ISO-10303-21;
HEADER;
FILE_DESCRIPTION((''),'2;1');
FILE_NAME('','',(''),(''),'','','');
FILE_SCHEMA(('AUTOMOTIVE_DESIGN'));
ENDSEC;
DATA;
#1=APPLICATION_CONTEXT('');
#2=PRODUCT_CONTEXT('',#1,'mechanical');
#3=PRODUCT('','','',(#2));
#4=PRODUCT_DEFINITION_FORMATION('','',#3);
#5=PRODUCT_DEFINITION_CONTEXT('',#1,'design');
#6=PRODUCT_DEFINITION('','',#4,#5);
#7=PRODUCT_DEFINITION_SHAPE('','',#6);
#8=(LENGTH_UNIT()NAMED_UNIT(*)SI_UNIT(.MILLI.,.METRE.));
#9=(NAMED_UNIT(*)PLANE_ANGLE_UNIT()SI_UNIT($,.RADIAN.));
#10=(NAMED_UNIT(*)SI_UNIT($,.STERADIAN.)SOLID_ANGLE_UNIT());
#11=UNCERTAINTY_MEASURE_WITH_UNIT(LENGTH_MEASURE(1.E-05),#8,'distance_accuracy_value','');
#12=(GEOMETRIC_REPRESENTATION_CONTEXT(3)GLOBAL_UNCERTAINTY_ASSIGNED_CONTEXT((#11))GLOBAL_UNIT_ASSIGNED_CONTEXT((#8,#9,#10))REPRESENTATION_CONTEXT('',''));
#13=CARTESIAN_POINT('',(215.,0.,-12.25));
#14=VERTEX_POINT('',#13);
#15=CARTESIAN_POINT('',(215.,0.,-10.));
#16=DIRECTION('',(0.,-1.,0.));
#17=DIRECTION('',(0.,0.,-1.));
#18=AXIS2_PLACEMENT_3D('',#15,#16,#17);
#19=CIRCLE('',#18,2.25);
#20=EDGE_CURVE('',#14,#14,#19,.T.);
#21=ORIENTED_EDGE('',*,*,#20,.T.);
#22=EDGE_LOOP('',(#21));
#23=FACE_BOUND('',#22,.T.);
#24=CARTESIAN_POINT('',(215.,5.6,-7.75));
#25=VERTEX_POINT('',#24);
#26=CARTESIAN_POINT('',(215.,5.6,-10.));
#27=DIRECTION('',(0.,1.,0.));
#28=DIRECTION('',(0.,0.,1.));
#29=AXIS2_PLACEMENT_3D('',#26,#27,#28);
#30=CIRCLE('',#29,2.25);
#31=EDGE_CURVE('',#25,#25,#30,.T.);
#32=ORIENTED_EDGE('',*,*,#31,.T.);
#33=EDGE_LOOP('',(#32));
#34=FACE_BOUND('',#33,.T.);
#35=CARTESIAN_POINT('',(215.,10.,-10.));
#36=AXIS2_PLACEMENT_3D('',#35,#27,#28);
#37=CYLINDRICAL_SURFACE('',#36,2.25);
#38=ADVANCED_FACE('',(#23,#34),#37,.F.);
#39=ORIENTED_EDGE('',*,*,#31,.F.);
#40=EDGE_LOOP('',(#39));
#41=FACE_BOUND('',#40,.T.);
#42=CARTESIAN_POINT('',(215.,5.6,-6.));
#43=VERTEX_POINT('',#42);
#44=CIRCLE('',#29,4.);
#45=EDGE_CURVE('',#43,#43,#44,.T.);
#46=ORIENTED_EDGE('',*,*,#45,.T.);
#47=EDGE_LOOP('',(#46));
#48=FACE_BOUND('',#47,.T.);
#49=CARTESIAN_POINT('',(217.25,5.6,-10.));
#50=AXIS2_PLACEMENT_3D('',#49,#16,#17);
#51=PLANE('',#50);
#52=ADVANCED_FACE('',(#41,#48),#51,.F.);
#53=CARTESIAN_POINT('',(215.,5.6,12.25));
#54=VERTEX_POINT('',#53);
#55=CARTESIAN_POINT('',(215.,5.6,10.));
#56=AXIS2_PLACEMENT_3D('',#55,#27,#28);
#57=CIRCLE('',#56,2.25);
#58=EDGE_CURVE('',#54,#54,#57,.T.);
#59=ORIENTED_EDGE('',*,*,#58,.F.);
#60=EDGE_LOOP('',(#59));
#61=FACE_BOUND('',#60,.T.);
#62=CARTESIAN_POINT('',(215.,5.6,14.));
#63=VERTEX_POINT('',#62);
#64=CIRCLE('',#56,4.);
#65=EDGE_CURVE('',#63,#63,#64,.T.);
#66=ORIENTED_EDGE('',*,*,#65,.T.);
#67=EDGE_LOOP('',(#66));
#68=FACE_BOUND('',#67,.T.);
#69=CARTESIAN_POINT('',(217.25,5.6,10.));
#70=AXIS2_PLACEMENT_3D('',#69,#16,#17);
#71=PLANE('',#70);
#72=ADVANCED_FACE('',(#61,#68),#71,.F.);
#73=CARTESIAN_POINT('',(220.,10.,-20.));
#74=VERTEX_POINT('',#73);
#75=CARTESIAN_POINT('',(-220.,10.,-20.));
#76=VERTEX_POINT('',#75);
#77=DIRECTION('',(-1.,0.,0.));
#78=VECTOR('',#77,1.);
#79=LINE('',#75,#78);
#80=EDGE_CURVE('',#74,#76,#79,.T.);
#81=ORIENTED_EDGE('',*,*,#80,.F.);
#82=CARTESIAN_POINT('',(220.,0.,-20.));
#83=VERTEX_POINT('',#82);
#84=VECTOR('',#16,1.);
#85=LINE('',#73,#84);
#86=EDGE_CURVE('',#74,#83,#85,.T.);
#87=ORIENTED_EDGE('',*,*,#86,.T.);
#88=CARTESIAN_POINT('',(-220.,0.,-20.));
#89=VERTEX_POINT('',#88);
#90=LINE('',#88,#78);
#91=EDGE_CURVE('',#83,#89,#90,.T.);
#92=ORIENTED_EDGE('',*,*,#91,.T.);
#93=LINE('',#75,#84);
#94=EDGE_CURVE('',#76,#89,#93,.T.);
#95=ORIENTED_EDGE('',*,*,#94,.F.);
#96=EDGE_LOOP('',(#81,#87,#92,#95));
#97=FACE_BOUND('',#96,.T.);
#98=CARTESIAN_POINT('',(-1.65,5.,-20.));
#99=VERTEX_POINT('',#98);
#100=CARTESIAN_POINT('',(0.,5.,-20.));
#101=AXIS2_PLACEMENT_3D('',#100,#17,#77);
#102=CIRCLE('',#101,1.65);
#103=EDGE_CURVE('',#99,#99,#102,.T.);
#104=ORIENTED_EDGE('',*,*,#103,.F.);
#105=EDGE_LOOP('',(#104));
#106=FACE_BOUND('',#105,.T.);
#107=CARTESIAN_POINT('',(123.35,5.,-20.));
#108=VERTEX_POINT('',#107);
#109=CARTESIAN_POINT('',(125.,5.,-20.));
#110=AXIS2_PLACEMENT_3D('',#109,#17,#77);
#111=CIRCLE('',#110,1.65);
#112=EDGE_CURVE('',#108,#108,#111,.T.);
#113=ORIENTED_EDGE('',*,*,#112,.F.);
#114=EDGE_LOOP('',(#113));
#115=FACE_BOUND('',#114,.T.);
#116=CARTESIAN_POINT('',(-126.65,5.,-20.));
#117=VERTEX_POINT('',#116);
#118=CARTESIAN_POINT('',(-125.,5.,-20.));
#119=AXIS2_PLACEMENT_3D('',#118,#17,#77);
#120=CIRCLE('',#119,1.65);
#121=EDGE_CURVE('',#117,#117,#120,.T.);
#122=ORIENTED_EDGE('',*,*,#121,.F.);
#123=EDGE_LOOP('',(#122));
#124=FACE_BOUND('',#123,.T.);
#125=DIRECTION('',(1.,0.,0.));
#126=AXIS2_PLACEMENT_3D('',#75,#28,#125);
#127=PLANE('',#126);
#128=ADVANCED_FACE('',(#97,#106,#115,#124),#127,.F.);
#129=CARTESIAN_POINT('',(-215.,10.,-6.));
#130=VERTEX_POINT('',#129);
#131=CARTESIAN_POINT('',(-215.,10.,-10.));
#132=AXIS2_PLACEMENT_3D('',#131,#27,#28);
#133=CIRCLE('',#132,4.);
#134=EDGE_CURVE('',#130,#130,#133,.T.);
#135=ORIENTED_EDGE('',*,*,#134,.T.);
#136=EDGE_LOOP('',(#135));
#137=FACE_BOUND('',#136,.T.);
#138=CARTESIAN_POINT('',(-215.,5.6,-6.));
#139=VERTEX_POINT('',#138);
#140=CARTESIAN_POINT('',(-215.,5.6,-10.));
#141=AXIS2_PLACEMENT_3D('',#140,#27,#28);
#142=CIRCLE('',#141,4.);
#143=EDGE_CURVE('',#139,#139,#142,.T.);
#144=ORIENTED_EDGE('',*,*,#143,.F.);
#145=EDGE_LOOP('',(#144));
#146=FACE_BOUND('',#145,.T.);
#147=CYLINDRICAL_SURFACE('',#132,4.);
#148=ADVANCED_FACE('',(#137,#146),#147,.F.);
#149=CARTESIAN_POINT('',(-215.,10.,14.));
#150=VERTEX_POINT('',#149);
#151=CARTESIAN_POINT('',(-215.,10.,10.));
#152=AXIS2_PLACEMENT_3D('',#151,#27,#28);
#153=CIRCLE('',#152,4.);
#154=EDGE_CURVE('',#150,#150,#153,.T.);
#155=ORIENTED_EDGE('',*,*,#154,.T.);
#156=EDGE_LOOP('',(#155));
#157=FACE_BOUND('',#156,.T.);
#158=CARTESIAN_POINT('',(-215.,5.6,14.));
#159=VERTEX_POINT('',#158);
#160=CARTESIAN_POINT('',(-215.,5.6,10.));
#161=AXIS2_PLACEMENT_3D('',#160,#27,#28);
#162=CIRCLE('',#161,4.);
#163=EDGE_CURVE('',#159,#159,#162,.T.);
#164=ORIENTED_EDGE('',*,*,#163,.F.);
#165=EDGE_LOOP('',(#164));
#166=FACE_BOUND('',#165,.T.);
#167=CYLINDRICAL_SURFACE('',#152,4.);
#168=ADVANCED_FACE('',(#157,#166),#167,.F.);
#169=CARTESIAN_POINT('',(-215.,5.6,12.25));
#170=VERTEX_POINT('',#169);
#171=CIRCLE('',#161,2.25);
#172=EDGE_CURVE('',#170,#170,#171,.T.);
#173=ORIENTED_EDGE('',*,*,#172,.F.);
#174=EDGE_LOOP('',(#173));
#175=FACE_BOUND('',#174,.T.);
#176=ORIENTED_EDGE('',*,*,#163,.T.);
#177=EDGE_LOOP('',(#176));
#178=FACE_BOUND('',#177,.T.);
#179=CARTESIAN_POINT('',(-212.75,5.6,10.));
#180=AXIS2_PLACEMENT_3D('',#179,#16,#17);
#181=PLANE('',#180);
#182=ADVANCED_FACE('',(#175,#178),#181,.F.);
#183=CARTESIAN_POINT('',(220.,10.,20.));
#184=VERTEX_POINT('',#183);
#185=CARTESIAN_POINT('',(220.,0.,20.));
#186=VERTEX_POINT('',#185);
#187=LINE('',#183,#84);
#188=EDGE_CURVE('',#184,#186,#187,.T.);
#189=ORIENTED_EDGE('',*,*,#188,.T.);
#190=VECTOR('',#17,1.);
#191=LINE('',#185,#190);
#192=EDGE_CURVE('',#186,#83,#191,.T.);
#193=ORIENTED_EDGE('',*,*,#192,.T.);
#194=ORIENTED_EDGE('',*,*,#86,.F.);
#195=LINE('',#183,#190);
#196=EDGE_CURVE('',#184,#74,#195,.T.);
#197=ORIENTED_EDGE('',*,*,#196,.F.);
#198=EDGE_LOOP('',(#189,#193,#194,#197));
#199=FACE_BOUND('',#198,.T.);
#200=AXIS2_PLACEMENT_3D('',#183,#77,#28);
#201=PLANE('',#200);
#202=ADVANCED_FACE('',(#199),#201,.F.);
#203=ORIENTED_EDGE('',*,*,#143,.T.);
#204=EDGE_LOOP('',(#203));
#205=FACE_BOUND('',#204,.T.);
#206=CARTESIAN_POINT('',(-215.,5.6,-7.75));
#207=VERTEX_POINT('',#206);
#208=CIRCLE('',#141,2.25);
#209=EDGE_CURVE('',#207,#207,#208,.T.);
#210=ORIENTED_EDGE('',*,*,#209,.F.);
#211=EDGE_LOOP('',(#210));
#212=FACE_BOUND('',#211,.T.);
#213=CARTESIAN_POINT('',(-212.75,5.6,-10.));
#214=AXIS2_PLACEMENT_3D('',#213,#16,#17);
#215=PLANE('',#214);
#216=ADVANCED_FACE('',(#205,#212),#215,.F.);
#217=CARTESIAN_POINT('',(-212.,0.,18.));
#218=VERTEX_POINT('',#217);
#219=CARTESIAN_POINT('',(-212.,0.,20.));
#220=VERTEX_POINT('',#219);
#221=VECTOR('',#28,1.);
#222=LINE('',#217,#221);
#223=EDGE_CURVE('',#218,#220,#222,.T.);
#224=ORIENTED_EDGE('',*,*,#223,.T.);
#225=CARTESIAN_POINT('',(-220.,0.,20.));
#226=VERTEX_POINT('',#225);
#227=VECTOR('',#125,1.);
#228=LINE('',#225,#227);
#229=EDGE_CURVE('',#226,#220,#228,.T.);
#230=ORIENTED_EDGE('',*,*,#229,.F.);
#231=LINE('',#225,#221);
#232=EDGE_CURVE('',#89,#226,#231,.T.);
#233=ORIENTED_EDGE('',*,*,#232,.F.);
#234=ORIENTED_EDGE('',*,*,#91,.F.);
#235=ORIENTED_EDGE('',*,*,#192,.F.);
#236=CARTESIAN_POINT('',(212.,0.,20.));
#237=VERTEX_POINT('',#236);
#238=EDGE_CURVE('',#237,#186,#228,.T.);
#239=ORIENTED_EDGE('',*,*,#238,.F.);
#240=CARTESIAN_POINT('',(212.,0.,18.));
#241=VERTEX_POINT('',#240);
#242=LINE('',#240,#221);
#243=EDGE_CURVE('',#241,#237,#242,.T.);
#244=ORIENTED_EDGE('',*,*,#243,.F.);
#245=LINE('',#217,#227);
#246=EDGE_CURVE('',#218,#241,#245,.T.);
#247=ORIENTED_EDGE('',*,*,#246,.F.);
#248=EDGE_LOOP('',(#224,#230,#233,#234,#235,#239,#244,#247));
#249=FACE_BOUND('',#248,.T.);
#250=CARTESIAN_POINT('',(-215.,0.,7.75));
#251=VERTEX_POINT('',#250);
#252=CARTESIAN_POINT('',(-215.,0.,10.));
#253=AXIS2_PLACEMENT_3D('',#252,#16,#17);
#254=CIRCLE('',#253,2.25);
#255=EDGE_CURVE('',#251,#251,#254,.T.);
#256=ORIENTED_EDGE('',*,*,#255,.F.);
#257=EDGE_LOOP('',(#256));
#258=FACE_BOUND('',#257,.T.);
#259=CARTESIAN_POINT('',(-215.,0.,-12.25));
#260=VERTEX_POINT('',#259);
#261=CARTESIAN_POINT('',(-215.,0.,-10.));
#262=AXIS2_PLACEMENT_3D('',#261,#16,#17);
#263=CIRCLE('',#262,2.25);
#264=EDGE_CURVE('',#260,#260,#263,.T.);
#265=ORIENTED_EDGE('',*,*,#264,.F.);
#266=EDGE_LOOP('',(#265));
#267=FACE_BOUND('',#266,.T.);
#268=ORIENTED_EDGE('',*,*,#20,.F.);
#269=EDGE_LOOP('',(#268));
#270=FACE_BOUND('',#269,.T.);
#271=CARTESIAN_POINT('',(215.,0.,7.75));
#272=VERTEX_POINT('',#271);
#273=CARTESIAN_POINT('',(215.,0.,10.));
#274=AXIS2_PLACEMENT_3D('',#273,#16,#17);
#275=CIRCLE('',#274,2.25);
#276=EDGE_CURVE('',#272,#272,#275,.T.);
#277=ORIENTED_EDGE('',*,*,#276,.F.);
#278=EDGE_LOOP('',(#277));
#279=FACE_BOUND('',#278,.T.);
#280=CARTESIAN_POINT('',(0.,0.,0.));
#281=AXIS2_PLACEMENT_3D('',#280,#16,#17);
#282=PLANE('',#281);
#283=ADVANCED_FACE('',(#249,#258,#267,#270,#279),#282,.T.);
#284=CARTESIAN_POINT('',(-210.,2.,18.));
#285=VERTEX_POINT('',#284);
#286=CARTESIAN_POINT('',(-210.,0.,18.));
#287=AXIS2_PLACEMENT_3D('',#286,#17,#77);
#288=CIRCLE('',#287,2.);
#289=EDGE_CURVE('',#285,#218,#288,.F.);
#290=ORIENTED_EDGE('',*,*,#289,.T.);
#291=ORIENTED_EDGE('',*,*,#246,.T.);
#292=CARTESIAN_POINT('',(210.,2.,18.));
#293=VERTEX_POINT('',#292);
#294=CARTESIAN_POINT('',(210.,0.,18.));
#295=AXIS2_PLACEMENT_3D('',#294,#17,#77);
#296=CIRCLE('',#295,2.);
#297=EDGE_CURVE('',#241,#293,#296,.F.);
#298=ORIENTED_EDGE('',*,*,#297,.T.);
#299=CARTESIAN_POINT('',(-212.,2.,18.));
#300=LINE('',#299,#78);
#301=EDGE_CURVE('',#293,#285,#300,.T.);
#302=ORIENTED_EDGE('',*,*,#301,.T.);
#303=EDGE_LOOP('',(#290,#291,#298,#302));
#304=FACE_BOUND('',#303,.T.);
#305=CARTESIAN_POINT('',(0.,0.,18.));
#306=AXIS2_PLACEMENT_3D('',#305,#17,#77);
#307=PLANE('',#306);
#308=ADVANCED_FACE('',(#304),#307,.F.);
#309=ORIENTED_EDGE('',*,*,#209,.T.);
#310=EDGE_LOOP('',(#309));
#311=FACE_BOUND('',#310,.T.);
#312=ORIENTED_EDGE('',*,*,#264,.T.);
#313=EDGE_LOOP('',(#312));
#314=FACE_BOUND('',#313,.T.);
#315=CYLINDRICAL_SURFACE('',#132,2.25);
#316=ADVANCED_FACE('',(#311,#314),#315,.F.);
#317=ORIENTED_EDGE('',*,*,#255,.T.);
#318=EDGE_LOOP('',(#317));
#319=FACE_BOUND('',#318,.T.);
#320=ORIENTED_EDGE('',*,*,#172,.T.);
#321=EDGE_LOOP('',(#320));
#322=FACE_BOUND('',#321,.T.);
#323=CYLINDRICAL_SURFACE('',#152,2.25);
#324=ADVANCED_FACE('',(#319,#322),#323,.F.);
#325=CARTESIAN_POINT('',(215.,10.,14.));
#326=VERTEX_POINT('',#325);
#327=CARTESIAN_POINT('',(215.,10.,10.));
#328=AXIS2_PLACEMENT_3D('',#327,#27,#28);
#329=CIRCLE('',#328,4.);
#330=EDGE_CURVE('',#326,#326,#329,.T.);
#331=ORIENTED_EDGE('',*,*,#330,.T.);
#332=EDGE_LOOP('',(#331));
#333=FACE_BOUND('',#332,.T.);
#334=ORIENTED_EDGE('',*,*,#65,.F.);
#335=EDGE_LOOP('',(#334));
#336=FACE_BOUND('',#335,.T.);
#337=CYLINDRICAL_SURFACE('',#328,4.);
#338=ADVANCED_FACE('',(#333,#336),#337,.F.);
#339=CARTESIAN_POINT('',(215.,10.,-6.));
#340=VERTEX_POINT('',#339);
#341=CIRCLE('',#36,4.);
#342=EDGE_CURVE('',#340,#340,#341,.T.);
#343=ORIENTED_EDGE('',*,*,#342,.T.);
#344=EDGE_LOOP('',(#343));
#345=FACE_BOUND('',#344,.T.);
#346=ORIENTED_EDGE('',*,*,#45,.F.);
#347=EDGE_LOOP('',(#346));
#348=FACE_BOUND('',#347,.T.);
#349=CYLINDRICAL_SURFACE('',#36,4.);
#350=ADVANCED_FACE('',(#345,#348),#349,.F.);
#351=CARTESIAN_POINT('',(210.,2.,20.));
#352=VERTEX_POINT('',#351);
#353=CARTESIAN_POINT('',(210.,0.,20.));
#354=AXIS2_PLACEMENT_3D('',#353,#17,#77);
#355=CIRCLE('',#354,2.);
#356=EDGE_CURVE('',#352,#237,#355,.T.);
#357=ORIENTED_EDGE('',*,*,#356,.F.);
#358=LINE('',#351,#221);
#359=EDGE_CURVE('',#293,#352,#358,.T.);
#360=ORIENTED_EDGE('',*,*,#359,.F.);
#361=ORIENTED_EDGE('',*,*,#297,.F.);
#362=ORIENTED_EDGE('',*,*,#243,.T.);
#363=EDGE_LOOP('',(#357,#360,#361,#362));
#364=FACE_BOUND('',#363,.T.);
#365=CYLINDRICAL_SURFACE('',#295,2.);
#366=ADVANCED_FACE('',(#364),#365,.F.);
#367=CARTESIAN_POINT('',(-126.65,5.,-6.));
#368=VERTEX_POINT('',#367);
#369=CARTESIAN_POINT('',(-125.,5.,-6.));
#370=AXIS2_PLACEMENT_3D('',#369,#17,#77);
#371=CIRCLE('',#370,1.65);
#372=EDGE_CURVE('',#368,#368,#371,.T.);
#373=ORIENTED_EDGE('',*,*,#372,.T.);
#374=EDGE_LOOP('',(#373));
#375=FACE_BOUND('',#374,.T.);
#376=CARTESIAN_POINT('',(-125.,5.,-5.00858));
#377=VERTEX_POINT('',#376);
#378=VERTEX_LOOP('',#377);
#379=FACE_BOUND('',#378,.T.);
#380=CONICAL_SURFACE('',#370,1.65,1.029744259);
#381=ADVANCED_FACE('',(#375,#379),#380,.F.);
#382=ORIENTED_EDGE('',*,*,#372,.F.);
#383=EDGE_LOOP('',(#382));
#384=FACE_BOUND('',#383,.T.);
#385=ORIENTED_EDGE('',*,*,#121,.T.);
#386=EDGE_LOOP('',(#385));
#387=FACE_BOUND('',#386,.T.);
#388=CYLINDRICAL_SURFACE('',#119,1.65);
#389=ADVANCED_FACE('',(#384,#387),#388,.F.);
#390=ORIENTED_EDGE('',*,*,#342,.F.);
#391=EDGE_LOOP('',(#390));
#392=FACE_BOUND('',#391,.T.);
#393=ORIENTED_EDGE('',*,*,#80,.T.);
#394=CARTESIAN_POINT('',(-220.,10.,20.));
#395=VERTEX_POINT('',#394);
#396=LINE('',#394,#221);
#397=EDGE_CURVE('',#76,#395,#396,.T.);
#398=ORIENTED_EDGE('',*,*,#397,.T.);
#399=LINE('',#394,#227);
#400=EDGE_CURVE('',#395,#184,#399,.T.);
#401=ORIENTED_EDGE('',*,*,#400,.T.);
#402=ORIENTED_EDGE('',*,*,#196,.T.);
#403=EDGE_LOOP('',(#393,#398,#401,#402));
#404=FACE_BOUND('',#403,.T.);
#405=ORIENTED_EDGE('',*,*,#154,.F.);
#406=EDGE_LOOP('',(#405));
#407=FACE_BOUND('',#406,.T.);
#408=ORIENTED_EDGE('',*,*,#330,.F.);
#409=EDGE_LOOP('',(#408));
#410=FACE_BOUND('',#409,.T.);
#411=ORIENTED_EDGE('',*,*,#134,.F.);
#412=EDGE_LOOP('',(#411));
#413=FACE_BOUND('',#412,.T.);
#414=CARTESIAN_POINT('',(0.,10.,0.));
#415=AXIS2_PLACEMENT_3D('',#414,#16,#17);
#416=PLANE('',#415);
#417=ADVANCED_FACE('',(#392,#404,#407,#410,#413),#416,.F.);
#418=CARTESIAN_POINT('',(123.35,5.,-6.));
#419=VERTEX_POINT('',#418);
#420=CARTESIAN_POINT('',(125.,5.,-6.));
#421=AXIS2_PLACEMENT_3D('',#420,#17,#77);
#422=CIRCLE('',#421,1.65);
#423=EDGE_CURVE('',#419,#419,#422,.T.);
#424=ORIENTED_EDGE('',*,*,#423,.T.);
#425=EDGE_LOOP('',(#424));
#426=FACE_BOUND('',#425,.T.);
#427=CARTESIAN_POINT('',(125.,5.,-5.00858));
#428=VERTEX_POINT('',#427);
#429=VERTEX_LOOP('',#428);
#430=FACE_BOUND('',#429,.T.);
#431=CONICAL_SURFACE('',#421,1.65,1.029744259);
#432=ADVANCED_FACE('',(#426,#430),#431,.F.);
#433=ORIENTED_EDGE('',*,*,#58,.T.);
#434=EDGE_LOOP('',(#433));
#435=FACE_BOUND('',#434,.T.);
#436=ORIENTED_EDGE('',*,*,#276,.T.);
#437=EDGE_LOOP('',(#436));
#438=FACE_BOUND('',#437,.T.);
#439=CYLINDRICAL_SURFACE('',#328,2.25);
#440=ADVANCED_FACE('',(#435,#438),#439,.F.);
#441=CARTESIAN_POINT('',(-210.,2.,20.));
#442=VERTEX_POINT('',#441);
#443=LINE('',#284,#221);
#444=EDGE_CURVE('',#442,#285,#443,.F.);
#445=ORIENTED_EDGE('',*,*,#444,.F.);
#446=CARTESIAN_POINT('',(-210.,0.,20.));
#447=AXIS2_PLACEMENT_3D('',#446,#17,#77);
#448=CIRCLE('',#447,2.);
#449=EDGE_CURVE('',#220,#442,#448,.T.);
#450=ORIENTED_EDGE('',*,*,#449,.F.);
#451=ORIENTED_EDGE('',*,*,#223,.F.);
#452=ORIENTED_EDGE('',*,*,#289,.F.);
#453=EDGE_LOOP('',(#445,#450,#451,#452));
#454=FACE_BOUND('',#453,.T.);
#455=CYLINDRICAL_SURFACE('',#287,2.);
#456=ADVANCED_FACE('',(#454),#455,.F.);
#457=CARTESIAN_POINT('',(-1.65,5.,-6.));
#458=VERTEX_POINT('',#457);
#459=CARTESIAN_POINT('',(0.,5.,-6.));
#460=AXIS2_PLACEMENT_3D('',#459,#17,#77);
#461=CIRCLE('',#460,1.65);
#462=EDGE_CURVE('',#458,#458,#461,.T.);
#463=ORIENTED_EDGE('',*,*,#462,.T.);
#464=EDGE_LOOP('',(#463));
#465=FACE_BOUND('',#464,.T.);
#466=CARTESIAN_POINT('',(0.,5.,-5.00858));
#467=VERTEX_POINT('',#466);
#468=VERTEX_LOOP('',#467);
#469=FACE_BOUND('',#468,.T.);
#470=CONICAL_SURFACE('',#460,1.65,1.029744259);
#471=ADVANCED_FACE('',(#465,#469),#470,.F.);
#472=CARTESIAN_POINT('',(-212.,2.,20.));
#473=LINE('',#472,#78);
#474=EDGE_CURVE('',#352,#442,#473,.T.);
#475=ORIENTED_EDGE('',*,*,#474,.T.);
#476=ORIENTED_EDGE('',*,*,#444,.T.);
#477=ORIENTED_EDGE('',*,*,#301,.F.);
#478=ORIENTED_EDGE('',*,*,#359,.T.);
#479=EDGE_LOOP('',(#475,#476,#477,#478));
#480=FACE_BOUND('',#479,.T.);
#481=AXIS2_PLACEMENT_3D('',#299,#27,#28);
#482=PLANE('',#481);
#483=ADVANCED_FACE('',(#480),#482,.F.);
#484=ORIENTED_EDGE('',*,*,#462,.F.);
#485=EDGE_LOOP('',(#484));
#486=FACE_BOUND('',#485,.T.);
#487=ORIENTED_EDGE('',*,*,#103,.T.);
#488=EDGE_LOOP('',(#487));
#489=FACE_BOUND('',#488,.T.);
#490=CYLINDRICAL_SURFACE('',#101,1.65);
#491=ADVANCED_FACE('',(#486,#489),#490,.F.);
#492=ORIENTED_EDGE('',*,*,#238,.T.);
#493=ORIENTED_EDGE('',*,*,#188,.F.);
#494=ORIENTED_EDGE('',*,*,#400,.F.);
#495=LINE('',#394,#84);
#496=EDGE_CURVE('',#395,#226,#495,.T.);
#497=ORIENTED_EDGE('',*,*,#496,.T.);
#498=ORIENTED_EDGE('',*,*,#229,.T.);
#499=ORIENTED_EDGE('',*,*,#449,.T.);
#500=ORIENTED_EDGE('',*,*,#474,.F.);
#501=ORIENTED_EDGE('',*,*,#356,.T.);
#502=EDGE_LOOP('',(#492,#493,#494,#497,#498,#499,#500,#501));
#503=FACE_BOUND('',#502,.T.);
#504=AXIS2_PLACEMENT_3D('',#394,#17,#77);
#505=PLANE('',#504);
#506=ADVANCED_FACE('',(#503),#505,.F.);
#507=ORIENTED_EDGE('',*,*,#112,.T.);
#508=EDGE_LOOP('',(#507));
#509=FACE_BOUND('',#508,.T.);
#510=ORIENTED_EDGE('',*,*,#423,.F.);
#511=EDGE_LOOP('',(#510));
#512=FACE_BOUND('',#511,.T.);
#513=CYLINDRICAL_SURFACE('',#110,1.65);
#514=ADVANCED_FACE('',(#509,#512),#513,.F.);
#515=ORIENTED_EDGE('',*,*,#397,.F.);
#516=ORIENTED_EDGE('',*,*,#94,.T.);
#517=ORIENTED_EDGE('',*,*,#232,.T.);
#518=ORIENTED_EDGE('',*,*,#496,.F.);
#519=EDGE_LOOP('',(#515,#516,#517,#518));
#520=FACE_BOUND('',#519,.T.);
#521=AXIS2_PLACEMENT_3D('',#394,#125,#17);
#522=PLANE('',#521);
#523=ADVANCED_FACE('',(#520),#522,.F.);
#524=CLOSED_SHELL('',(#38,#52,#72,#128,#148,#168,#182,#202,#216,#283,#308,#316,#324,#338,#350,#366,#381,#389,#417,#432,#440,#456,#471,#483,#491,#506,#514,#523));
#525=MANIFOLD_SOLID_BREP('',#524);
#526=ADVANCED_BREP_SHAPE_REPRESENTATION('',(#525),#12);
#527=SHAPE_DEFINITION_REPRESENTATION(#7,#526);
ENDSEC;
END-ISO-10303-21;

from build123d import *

# Parameters (mm, degrees)
SKETCH1_W                                    = 440
SKETCH1_H                                    = 40
BOSS_EXTRUDE1_DEPTH                          = 10
SKETCH2_W                                    = 424
SKETCH2_H                                    = 2
CUT_EXTRUDE1_DEPTH                           = 2
FILLET1_R                                    = 2
CBORE_FOR_M4_HEX_SOCKET_HEAD_CAP_SCR_2_COUNT = 2
CBORE_FOR_M4_HEX_SOCKET_HEAD_CAP_SCR_2_PITCH = 20
M4X0_7_TAPPED_HOLE1_D                        = 3.3
M4X0_7_TAPPED_HOLE1_DEPTH                    = 14
M4X0_7_TAPPED_HOLE1_TIP                      = 0.991420021


with BuildPart() as part:
    # Sketch1 → Boss-Extrude1 (new body)
    with BuildSketch(Plane(origin=(0, 0, 0), x_dir=(1, 0, 0), z_dir=(0, 1, 0))):
        Rectangle(SKETCH1_W, SKETCH1_H)
    extrude(amount=BOSS_EXTRUDE1_DEPTH)

    # Sketch2 → Cut-Extrude1 (cut)
    with BuildSketch(Plane.XY.offset(20)):
        with Locations((0, 1)):
            Rectangle(SKETCH2_W, SKETCH2_H)
    extrude(amount=-CUT_EXTRUDE1_DEPTH, mode=Mode.SUBTRACT)

    # Fillet1
    fillet1_edges = [part.edges().sort_by_distance(p)[0] for p in [
        (-212, 2, 19),
        (212, 2, 19),
    ]]
    fillet(fillet1_edges, radius=FILLET1_R - 0.0001)  # a hair under: the kernel refuses the full size

    # Sketch4 → CBORE for M4 Hex Socket Head Cap Screw1 (revolve, cut)
    with BuildSketch(Plane(origin=(-215, 10, -10), x_dir=(0, 0, 1), z_dir=(1, 0, 0))):
        Polygon((0, 0), (0, 15.351936393), (2.25, 14), (2.25, 4.4), (4, 4.4), (4, 0), align=None)
    cbore_for_m4_hex_socket_head_cap_screw1 = revolve(axis=Axis((-215, 16.35, -10), (0, -1, 0)), mode=Mode.SUBTRACT)

    # CBORE for M4 Hex Socket Head Cap Scr 2: CBORE for M4 Hex Socket Head Cap Screw1 ×2
    with Locations(*[(0, 0, i * CBORE_FOR_M4_HEX_SOCKET_HEAD_CAP_SCR_2_PITCH) for i in range(1, CBORE_FOR_M4_HEX_SOCKET_HEAD_CAP_SCR_2_COUNT)]):
        add(cbore_for_m4_hex_socket_head_cap_screw1, mode=Mode.SUBTRACT)

    # Mirror1: CBORE for M4 Hex Socket Head Cap Screw1 across plane
    add(cbore_for_m4_hex_socket_head_cap_screw1.mirror(Plane(origin=(0, 0, 0), x_dir=(0, 0, 1), z_dir=(1, 0, 0))), mode=Mode.SUBTRACT)

    # Mirror1 copy 1 sketch → Mirror1 copy 1 (revolve, cut)
    with BuildSketch(Plane(origin=(215, 10, 10), x_dir=(0, 0, 1), z_dir=(-1, 0, 0))):
        Polygon((0, 0), (0, -15.351936393), (2.25, -14), (2.25, -4.4), (4, -4.4), (4, 0), align=None)
    revolve(axis=Axis((215, 16.35, 10), (0, 1, 0)), mode=Mode.SUBTRACT)

    # M4x0.7 Tapped Hole1
    with Locations(Plane(origin=(0, 0, -20), x_dir=(-1, 0, 0), z_dir=(0, 0, -1))):
        with Locations((125, 5), (0, 5), (-125, 5)):
            Hole(M4X0_7_TAPPED_HOLE1_D / 2, depth=M4X0_7_TAPPED_HOLE1_DEPTH)
            with Locations((0, 0, -(M4X0_7_TAPPED_HOLE1_DEPTH + M4X0_7_TAPPED_HOLE1_TIP / 2))):  # 118° drill point
                Cone(0, M4X0_7_TAPPED_HOLE1_D / 2, M4X0_7_TAPPED_HOLE1_TIP, mode=Mode.SUBTRACT)


solid = part.part
